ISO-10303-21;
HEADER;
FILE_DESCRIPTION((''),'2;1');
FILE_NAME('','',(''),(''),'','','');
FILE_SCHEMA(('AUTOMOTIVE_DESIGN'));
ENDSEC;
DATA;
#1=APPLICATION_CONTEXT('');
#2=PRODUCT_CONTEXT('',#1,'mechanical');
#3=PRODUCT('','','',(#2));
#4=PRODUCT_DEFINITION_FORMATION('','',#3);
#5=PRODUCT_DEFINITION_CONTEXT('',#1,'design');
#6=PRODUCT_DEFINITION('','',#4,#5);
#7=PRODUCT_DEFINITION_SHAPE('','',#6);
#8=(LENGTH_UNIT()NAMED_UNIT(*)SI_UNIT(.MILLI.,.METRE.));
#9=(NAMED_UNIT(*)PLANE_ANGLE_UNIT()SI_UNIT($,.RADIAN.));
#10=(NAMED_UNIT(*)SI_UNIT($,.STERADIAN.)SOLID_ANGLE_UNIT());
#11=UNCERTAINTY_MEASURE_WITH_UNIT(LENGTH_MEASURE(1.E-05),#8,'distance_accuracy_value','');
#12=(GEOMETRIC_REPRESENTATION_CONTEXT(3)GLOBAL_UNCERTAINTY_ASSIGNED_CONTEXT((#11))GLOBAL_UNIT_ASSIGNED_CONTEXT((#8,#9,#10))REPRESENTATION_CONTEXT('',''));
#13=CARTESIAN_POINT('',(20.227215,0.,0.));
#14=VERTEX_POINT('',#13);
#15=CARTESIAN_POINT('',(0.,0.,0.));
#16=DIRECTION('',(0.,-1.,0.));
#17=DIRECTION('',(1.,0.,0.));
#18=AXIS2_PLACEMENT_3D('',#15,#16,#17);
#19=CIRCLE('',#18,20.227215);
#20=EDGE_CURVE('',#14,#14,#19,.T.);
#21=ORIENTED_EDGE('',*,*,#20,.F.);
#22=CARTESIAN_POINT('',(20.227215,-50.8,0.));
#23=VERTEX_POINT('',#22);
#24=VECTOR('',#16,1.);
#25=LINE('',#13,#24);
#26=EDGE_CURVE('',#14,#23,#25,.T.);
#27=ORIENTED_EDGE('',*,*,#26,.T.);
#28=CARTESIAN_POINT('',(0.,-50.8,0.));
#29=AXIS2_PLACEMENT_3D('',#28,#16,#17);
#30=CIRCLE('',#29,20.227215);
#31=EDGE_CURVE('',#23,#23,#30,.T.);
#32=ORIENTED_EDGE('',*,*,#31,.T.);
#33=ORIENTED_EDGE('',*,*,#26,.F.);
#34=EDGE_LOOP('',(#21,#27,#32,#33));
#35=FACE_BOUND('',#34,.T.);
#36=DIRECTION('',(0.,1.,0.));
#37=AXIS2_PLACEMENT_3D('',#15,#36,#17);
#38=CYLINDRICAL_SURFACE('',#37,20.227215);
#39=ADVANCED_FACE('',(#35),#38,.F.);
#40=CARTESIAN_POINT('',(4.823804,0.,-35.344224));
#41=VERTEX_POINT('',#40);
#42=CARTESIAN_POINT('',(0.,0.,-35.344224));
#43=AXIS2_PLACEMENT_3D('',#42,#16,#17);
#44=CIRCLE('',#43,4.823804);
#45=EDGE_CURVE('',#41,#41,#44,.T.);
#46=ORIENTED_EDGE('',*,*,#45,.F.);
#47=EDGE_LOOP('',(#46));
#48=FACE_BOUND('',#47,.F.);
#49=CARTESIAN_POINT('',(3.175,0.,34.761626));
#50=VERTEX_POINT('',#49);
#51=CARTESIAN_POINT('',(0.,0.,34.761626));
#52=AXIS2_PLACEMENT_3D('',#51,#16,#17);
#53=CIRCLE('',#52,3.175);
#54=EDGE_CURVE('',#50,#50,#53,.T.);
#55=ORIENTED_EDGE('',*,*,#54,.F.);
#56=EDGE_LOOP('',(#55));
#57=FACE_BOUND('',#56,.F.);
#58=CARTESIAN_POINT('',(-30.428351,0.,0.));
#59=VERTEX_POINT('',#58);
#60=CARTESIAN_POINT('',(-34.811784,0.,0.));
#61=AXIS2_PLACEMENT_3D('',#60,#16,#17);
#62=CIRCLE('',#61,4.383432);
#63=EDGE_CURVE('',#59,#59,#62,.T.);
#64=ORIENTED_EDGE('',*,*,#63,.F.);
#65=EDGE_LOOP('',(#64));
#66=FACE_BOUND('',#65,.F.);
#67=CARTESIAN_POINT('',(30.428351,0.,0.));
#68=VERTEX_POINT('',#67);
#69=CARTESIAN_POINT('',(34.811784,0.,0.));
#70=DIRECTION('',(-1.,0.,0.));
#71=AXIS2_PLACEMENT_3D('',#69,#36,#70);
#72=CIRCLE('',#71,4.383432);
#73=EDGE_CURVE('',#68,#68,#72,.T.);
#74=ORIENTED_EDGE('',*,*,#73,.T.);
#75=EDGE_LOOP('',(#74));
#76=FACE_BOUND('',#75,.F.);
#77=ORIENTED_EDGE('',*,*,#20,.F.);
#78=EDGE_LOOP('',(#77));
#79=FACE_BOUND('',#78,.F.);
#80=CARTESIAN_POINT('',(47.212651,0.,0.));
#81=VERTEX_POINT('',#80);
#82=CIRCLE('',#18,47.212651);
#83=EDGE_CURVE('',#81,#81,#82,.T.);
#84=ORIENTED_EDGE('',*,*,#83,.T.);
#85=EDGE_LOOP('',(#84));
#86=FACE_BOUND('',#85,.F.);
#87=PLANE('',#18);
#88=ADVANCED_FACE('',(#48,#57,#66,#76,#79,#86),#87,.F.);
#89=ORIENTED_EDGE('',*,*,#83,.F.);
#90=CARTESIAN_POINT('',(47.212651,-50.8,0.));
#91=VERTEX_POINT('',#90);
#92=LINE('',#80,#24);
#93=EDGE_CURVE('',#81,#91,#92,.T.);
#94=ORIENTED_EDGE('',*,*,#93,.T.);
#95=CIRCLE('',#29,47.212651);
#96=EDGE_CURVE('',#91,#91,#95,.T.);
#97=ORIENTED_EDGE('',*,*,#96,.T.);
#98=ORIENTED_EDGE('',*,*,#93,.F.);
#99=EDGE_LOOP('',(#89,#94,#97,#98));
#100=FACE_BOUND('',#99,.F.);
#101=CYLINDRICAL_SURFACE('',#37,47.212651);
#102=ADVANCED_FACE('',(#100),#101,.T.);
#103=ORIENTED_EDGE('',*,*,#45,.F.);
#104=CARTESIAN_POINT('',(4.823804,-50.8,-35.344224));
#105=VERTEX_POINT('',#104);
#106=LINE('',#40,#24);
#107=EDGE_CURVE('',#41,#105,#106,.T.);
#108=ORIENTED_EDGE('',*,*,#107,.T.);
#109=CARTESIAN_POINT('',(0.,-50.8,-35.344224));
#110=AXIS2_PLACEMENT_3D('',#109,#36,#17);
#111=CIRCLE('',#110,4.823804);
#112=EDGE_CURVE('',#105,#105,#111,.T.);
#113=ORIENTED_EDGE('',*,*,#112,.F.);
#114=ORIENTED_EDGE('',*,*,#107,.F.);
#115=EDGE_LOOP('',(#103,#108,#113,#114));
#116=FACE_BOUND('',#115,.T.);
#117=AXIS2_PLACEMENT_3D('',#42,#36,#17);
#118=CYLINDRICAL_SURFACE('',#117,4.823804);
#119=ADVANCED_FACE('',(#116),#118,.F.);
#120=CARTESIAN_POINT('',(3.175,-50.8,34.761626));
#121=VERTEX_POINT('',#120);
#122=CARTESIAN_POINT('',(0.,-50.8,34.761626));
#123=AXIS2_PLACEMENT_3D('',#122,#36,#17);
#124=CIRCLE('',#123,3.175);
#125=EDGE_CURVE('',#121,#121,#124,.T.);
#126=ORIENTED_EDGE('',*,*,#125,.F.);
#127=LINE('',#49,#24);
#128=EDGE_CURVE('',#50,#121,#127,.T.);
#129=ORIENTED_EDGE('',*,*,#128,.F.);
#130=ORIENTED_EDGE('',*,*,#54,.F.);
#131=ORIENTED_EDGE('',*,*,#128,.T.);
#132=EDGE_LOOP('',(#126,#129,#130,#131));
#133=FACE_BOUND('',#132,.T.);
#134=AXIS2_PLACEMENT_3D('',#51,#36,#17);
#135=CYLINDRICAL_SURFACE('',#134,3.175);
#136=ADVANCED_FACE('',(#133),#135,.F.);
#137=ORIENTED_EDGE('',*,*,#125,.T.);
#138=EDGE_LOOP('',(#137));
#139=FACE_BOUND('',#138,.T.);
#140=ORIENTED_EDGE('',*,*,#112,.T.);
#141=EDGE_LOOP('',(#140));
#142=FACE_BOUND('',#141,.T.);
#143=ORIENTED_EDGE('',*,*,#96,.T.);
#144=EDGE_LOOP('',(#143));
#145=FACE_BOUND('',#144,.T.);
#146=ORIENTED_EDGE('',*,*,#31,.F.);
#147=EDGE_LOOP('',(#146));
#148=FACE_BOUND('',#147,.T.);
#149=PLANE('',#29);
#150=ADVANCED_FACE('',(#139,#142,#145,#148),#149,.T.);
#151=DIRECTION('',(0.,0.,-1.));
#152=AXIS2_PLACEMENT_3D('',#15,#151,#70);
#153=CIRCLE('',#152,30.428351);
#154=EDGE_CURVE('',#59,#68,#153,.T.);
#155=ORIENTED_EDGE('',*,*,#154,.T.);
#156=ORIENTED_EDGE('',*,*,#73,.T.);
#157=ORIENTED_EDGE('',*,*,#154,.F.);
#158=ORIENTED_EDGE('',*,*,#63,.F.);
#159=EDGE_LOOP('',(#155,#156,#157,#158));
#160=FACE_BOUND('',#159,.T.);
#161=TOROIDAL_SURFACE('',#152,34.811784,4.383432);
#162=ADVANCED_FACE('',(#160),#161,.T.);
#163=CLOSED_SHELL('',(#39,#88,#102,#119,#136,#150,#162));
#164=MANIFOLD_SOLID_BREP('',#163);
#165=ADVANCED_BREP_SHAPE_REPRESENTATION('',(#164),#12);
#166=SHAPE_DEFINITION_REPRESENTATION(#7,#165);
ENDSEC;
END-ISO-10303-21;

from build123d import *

# Parameters (mm, degrees)
F0_R     = 47.2126506678
F0_R_2   = 20.2272154061
F1_DEPTH = 50.8
F2_R     = 3.175
F2_R_2   = 4.8238037601
F3_DEPTH = 50.801
F4_R     = 4.3834323194
F5_ANGLE = 180


# Not quite as in the source:
# - the program builds the solid bodies; features that only make, move or delete a surface that nothing else refers to are left out


with BuildPart() as f1:
    # F0 (on Front) → F1 (new body)
    with BuildSketch(Plane.XZ):
        Circle(F0_R)
        Circle(F0_R_2, mode=Mode.SUBTRACT)
    extrude(amount=F1_DEPTH)

    # F2 (on Front) → F3 (cut, through all)
    with BuildSketch(Plane.XZ):
        with Locations((0, 34.7616262734)):
            Circle(F2_R)
        with Locations((0, -35.3442244232)):
            Circle(F2_R_2)
    extrude(amount=F3_DEPTH, mode=Mode.SUBTRACT)

    # F4 (on Front) → F5 (revolve)
    with BuildSketch(Plane.XZ):
        with Locations((-34.811783582, 0)):
            Circle(F4_R)
    revolve(axis=Axis((0, 0, 1.5608235262), (0, 0, -1)), revolution_arc=F5_ANGLE)


solid = f1.part
